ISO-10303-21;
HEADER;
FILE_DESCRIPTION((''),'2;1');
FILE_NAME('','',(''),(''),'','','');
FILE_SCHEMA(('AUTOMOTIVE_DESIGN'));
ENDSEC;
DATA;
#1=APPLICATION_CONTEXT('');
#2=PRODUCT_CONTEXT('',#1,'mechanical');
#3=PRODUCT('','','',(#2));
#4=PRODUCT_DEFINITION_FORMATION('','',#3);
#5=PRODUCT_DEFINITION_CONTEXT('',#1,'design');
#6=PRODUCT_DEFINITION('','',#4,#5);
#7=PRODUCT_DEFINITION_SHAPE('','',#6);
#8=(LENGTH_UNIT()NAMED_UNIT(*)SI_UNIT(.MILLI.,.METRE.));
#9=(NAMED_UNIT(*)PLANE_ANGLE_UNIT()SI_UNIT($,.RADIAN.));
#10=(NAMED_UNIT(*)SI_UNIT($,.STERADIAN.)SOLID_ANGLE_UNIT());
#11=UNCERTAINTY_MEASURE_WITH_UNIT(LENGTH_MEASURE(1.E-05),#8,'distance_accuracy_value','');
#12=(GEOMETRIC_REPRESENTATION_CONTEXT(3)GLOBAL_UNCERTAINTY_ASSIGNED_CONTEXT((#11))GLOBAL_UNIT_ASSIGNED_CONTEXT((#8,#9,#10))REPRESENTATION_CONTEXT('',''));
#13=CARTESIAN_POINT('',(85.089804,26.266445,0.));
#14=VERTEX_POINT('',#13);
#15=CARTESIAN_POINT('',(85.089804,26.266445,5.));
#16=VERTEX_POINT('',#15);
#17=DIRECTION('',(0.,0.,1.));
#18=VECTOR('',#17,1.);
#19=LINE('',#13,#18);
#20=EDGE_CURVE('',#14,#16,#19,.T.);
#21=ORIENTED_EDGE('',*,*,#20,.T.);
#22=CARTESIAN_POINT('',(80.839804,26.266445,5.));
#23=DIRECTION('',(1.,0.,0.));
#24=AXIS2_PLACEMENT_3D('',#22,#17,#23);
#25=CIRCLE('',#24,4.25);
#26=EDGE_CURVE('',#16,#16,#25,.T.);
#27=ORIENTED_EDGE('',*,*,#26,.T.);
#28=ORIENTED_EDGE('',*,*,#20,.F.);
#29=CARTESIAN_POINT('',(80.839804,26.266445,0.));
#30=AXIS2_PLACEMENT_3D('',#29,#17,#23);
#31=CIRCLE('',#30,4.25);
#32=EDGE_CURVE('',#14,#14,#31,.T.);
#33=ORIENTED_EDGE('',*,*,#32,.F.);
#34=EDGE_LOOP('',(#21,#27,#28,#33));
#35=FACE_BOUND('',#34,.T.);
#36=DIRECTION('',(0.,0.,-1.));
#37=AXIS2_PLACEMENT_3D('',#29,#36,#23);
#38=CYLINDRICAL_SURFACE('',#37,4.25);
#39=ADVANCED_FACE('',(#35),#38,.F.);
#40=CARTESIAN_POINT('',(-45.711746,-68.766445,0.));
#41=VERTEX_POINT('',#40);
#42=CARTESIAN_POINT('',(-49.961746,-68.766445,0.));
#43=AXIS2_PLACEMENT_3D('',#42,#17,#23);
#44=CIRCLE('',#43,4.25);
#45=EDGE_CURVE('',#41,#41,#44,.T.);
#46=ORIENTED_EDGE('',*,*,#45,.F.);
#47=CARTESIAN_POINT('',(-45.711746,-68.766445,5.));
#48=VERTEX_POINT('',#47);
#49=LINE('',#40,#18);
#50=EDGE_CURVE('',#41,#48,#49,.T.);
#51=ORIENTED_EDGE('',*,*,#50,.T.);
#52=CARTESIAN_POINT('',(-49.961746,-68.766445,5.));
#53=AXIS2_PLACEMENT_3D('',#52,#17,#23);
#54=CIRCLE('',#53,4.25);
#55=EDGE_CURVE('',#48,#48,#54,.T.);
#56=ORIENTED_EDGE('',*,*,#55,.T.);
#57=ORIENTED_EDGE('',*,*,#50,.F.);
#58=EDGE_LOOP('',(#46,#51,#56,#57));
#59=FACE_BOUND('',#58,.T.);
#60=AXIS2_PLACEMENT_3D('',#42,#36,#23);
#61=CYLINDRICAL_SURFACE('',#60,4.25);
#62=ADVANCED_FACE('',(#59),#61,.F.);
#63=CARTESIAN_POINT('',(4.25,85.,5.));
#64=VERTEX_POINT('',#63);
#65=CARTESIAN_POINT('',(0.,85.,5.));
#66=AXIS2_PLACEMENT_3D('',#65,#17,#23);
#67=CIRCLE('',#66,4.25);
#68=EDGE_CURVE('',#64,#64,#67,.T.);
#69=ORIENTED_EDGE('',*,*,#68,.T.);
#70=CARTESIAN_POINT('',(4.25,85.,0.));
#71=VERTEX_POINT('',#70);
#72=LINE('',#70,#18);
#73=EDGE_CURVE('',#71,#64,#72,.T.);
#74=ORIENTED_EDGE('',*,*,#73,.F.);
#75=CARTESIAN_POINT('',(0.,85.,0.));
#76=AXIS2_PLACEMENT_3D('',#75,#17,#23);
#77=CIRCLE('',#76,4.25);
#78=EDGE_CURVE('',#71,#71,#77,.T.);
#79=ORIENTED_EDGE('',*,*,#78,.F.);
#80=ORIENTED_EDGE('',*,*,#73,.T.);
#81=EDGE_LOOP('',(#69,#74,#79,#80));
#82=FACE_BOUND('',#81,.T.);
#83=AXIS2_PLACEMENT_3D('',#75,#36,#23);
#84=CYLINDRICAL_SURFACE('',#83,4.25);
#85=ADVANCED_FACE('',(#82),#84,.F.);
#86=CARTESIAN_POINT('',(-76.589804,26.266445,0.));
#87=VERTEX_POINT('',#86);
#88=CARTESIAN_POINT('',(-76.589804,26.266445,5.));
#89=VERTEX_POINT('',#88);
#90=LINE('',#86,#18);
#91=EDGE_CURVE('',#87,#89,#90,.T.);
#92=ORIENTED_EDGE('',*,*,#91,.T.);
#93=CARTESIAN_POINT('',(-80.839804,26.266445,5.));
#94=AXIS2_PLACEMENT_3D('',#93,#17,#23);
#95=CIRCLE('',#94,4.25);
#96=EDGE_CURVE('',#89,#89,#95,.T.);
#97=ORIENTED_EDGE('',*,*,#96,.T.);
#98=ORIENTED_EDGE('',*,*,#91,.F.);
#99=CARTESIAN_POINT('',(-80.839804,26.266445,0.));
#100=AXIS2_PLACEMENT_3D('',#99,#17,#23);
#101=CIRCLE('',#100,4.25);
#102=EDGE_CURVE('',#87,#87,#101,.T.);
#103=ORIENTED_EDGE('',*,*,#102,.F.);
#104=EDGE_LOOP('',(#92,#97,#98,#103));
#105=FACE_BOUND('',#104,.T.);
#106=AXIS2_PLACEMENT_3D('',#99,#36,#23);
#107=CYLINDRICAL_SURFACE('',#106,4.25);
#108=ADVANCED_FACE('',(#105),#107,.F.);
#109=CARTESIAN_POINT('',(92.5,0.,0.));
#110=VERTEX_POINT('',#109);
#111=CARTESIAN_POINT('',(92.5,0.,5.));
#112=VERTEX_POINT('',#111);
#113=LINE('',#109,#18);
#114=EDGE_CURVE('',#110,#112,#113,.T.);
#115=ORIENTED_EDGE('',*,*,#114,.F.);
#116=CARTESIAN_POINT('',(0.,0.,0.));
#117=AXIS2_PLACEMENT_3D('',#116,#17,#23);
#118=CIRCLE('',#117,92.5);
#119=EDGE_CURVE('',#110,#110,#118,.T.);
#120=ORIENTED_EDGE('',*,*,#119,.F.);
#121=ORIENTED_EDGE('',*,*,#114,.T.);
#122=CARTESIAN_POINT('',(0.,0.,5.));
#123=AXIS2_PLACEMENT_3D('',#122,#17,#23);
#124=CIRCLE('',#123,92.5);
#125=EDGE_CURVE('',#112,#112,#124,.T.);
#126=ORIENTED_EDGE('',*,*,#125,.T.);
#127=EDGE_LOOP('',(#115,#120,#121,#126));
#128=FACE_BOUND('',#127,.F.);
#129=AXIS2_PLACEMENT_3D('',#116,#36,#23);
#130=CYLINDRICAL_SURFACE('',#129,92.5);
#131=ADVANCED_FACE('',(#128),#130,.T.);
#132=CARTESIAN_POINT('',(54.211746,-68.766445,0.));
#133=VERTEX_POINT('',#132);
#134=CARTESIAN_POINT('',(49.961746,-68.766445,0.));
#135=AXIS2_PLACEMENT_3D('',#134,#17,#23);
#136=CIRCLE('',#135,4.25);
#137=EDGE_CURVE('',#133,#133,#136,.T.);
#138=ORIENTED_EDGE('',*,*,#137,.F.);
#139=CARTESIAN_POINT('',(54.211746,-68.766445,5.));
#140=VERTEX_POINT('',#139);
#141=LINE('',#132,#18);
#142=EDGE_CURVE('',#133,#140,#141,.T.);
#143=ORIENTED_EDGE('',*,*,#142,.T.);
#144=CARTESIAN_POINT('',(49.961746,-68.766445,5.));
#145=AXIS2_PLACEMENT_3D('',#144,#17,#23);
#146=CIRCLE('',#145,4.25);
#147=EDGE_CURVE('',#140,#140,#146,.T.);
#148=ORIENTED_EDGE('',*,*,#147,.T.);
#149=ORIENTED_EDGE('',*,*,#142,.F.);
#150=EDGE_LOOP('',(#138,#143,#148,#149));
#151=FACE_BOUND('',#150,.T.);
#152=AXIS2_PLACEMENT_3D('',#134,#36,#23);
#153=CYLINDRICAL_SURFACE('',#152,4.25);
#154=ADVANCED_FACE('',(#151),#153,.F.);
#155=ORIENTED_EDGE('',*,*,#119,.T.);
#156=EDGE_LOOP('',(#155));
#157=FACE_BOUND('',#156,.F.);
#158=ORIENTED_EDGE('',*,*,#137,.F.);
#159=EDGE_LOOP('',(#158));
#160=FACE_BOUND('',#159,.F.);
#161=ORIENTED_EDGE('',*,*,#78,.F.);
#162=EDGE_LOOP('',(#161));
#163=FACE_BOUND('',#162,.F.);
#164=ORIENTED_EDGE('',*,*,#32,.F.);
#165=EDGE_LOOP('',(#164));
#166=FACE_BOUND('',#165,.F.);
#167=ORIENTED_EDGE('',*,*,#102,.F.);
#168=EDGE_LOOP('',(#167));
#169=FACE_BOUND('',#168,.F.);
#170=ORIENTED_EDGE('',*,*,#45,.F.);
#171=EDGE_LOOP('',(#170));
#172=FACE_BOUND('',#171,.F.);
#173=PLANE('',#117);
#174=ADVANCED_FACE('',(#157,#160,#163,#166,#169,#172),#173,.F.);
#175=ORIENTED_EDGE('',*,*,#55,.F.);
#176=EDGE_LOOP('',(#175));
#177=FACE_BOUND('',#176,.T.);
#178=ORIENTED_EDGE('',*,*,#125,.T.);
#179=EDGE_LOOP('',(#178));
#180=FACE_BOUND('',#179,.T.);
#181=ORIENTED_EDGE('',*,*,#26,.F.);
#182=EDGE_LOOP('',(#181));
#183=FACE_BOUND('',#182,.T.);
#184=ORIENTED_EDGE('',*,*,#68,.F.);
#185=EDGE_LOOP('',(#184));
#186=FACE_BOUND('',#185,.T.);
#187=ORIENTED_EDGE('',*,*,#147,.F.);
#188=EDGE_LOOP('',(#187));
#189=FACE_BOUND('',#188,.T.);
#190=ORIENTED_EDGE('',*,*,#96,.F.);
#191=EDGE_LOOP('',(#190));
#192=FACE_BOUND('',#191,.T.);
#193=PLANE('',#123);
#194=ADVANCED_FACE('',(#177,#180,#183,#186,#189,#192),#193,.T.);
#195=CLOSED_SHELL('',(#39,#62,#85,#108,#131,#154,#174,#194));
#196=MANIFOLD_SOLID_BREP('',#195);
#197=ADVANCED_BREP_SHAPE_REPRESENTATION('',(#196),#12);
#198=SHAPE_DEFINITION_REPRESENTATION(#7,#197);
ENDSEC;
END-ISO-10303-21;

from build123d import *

# Parameters (mm, degrees)
F0_R     = 92.5
F0_R_2   = 4.25
F1_DEPTH = 5


# Not quite as in the source:
# - a feature names something its author has since deleted; it is built from what else it names


with BuildPart() as f1:
    # F0 (on Top) → F1 (new body)
    with BuildSketch(Plane.XY):
        Circle(F0_R)
        with Locations((-49.9617464449, -68.7664445219)):
            Circle(F0_R_2, mode=Mode.SUBTRACT)
        with Locations((49.9617464449, -68.7664445219)):
            Circle(F0_R_2, mode=Mode.SUBTRACT)
        with Locations((-80.8398038851, 26.2664445219)):
            Circle(F0_R_2, mode=Mode.SUBTRACT)
        with Locations((80.8398038851, 26.2664445219)):
            Circle(F0_R_2, mode=Mode.SUBTRACT)
        with Locations((0, 85)):
            Circle(F0_R_2, mode=Mode.SUBTRACT)
    extrude(amount=F1_DEPTH)


solid = f1.part
